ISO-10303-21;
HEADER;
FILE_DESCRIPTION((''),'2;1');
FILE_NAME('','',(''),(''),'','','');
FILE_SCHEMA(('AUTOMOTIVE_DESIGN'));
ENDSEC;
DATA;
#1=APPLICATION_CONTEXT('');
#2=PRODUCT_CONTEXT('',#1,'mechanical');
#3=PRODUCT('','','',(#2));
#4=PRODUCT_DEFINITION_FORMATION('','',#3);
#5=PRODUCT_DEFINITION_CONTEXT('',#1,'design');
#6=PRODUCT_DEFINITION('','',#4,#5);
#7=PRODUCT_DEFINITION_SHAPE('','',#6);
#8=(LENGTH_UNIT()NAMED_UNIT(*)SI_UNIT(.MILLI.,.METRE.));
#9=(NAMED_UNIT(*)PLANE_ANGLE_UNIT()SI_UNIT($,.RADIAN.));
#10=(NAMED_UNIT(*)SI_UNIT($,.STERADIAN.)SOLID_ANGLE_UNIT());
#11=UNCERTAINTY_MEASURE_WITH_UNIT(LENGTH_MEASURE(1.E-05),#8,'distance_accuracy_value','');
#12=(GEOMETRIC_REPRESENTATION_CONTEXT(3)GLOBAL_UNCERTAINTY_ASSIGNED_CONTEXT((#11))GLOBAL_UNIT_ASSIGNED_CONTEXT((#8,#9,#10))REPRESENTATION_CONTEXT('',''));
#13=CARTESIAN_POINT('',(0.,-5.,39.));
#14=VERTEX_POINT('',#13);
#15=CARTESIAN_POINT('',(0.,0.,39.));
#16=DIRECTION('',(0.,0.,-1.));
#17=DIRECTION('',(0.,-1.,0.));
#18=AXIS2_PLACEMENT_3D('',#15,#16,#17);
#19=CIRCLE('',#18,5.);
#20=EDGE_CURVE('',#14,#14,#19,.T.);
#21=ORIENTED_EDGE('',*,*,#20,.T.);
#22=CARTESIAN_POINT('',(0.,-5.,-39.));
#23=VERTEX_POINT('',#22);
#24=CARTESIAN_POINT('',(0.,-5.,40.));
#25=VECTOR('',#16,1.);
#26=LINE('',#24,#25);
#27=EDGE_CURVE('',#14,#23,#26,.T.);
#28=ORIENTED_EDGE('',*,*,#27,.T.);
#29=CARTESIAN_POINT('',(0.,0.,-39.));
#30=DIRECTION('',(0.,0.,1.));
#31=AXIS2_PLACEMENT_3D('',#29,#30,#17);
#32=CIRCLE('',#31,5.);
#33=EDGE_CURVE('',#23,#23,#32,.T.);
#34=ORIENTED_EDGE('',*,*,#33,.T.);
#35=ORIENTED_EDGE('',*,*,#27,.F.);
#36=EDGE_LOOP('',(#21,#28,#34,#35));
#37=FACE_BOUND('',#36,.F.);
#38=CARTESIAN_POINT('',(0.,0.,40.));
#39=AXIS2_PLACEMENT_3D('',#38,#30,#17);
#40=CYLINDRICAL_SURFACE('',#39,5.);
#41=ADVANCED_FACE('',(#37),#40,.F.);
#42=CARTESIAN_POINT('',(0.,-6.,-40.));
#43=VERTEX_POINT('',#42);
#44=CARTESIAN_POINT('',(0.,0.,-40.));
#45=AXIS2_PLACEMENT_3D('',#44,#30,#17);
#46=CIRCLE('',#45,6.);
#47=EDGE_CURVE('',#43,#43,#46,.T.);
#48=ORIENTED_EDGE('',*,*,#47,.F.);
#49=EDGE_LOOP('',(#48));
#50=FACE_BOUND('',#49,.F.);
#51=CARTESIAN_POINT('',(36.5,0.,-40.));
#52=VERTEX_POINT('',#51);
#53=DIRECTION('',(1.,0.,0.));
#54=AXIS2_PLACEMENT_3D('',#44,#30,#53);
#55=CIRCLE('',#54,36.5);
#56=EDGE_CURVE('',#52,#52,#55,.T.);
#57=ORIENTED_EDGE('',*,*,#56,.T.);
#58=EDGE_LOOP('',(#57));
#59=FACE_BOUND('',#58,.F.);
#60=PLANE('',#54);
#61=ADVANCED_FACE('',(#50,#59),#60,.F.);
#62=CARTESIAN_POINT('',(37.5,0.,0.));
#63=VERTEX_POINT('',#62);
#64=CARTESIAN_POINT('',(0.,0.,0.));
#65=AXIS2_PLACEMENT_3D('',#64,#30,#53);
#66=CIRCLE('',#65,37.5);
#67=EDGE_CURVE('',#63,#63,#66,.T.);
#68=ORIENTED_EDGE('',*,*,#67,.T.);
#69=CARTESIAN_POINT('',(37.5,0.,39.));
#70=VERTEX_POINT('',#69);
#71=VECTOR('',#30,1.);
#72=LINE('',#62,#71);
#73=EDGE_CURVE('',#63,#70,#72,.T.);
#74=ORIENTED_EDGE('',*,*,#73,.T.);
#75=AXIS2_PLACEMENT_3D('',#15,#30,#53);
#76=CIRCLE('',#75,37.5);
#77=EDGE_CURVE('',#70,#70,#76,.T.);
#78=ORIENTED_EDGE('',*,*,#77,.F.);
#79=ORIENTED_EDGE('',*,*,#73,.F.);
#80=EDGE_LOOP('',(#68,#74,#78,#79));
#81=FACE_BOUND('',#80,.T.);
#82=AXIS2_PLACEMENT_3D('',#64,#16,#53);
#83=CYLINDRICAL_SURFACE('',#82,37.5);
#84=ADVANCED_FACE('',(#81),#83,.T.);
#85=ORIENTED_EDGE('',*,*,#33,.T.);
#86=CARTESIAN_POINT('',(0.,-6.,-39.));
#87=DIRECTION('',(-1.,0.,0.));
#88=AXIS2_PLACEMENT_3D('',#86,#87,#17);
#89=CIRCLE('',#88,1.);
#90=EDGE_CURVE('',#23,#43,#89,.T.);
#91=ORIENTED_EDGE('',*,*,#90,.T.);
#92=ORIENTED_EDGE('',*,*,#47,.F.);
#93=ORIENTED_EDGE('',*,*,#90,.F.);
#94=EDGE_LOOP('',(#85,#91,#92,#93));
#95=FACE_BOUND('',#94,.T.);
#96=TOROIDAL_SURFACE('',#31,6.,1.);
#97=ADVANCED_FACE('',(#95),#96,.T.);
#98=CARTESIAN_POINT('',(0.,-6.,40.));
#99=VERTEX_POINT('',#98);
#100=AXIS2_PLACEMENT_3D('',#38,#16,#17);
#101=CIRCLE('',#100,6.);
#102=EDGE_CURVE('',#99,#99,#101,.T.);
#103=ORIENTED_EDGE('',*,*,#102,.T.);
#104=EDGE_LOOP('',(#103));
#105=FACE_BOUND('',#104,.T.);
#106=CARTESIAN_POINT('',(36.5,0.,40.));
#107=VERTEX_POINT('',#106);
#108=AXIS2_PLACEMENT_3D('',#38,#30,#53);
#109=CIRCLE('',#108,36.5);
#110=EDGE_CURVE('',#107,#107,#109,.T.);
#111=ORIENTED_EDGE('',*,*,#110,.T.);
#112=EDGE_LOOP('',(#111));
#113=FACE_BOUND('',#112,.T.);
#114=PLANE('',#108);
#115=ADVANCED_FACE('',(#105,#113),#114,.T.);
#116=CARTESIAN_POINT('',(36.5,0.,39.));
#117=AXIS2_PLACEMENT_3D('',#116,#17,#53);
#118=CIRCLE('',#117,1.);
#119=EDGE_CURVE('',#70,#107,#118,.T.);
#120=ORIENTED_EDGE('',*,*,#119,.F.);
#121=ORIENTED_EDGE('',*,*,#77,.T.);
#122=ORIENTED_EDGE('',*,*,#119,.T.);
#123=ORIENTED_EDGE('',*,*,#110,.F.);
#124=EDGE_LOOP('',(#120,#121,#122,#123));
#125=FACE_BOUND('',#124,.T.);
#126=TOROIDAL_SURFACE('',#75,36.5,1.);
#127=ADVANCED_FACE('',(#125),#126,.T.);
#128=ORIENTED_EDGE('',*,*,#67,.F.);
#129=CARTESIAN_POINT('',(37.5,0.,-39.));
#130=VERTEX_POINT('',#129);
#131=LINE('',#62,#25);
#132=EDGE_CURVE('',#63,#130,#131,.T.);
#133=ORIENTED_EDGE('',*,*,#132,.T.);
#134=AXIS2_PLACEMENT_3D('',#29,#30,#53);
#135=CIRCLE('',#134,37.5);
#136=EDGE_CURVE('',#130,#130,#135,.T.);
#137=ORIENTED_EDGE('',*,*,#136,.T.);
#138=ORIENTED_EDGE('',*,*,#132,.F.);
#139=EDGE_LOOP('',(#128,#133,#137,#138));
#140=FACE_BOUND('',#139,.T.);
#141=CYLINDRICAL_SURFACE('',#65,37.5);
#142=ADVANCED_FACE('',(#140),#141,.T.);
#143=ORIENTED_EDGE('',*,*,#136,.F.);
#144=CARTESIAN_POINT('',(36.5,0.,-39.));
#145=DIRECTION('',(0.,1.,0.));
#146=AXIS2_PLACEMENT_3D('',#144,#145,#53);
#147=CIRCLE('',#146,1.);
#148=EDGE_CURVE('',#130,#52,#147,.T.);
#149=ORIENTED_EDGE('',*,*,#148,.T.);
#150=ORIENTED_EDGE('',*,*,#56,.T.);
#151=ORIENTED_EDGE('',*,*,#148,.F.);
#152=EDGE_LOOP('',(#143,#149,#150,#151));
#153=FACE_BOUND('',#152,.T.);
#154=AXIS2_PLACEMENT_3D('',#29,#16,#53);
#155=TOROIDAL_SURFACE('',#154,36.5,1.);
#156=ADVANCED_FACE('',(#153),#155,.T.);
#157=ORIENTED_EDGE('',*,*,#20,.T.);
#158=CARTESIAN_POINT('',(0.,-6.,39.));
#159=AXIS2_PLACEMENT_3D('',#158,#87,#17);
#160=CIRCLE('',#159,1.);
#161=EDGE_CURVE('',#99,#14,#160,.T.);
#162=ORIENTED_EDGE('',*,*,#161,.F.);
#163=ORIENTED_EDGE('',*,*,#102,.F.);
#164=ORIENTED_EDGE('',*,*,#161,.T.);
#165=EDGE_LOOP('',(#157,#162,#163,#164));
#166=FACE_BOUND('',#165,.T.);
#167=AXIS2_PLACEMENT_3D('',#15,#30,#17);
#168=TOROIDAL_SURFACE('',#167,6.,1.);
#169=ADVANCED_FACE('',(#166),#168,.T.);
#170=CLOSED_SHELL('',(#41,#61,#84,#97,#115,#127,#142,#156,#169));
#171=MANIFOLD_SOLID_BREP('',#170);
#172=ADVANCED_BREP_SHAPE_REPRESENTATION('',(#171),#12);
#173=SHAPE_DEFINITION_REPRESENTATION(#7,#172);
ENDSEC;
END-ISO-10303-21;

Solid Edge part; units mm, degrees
sketch "Sketch1" plane through (0, 0, 0) normal (0, 0, 1) x (1, 0, 0)
  circle A0 centre (0, 0) radius 37.5
  dimension "D1" = 75
extrude "ExtrudedProtrusion_1" add sketch "Sketch1" along normal mid plane 80
fillet "Round_1" radius 1 2 edges at (-37.5, 0, 40) (-37.5, 0, -40)
hole "Hole_1" at (0, 0, 40) direction (0, 0, -1) diameter 10 end up to next
fillet "Round_2" radius 1 2 edges at (-5, 0, 40) (5, 0, -40)
properties material "Acrylic, high impact grade"
